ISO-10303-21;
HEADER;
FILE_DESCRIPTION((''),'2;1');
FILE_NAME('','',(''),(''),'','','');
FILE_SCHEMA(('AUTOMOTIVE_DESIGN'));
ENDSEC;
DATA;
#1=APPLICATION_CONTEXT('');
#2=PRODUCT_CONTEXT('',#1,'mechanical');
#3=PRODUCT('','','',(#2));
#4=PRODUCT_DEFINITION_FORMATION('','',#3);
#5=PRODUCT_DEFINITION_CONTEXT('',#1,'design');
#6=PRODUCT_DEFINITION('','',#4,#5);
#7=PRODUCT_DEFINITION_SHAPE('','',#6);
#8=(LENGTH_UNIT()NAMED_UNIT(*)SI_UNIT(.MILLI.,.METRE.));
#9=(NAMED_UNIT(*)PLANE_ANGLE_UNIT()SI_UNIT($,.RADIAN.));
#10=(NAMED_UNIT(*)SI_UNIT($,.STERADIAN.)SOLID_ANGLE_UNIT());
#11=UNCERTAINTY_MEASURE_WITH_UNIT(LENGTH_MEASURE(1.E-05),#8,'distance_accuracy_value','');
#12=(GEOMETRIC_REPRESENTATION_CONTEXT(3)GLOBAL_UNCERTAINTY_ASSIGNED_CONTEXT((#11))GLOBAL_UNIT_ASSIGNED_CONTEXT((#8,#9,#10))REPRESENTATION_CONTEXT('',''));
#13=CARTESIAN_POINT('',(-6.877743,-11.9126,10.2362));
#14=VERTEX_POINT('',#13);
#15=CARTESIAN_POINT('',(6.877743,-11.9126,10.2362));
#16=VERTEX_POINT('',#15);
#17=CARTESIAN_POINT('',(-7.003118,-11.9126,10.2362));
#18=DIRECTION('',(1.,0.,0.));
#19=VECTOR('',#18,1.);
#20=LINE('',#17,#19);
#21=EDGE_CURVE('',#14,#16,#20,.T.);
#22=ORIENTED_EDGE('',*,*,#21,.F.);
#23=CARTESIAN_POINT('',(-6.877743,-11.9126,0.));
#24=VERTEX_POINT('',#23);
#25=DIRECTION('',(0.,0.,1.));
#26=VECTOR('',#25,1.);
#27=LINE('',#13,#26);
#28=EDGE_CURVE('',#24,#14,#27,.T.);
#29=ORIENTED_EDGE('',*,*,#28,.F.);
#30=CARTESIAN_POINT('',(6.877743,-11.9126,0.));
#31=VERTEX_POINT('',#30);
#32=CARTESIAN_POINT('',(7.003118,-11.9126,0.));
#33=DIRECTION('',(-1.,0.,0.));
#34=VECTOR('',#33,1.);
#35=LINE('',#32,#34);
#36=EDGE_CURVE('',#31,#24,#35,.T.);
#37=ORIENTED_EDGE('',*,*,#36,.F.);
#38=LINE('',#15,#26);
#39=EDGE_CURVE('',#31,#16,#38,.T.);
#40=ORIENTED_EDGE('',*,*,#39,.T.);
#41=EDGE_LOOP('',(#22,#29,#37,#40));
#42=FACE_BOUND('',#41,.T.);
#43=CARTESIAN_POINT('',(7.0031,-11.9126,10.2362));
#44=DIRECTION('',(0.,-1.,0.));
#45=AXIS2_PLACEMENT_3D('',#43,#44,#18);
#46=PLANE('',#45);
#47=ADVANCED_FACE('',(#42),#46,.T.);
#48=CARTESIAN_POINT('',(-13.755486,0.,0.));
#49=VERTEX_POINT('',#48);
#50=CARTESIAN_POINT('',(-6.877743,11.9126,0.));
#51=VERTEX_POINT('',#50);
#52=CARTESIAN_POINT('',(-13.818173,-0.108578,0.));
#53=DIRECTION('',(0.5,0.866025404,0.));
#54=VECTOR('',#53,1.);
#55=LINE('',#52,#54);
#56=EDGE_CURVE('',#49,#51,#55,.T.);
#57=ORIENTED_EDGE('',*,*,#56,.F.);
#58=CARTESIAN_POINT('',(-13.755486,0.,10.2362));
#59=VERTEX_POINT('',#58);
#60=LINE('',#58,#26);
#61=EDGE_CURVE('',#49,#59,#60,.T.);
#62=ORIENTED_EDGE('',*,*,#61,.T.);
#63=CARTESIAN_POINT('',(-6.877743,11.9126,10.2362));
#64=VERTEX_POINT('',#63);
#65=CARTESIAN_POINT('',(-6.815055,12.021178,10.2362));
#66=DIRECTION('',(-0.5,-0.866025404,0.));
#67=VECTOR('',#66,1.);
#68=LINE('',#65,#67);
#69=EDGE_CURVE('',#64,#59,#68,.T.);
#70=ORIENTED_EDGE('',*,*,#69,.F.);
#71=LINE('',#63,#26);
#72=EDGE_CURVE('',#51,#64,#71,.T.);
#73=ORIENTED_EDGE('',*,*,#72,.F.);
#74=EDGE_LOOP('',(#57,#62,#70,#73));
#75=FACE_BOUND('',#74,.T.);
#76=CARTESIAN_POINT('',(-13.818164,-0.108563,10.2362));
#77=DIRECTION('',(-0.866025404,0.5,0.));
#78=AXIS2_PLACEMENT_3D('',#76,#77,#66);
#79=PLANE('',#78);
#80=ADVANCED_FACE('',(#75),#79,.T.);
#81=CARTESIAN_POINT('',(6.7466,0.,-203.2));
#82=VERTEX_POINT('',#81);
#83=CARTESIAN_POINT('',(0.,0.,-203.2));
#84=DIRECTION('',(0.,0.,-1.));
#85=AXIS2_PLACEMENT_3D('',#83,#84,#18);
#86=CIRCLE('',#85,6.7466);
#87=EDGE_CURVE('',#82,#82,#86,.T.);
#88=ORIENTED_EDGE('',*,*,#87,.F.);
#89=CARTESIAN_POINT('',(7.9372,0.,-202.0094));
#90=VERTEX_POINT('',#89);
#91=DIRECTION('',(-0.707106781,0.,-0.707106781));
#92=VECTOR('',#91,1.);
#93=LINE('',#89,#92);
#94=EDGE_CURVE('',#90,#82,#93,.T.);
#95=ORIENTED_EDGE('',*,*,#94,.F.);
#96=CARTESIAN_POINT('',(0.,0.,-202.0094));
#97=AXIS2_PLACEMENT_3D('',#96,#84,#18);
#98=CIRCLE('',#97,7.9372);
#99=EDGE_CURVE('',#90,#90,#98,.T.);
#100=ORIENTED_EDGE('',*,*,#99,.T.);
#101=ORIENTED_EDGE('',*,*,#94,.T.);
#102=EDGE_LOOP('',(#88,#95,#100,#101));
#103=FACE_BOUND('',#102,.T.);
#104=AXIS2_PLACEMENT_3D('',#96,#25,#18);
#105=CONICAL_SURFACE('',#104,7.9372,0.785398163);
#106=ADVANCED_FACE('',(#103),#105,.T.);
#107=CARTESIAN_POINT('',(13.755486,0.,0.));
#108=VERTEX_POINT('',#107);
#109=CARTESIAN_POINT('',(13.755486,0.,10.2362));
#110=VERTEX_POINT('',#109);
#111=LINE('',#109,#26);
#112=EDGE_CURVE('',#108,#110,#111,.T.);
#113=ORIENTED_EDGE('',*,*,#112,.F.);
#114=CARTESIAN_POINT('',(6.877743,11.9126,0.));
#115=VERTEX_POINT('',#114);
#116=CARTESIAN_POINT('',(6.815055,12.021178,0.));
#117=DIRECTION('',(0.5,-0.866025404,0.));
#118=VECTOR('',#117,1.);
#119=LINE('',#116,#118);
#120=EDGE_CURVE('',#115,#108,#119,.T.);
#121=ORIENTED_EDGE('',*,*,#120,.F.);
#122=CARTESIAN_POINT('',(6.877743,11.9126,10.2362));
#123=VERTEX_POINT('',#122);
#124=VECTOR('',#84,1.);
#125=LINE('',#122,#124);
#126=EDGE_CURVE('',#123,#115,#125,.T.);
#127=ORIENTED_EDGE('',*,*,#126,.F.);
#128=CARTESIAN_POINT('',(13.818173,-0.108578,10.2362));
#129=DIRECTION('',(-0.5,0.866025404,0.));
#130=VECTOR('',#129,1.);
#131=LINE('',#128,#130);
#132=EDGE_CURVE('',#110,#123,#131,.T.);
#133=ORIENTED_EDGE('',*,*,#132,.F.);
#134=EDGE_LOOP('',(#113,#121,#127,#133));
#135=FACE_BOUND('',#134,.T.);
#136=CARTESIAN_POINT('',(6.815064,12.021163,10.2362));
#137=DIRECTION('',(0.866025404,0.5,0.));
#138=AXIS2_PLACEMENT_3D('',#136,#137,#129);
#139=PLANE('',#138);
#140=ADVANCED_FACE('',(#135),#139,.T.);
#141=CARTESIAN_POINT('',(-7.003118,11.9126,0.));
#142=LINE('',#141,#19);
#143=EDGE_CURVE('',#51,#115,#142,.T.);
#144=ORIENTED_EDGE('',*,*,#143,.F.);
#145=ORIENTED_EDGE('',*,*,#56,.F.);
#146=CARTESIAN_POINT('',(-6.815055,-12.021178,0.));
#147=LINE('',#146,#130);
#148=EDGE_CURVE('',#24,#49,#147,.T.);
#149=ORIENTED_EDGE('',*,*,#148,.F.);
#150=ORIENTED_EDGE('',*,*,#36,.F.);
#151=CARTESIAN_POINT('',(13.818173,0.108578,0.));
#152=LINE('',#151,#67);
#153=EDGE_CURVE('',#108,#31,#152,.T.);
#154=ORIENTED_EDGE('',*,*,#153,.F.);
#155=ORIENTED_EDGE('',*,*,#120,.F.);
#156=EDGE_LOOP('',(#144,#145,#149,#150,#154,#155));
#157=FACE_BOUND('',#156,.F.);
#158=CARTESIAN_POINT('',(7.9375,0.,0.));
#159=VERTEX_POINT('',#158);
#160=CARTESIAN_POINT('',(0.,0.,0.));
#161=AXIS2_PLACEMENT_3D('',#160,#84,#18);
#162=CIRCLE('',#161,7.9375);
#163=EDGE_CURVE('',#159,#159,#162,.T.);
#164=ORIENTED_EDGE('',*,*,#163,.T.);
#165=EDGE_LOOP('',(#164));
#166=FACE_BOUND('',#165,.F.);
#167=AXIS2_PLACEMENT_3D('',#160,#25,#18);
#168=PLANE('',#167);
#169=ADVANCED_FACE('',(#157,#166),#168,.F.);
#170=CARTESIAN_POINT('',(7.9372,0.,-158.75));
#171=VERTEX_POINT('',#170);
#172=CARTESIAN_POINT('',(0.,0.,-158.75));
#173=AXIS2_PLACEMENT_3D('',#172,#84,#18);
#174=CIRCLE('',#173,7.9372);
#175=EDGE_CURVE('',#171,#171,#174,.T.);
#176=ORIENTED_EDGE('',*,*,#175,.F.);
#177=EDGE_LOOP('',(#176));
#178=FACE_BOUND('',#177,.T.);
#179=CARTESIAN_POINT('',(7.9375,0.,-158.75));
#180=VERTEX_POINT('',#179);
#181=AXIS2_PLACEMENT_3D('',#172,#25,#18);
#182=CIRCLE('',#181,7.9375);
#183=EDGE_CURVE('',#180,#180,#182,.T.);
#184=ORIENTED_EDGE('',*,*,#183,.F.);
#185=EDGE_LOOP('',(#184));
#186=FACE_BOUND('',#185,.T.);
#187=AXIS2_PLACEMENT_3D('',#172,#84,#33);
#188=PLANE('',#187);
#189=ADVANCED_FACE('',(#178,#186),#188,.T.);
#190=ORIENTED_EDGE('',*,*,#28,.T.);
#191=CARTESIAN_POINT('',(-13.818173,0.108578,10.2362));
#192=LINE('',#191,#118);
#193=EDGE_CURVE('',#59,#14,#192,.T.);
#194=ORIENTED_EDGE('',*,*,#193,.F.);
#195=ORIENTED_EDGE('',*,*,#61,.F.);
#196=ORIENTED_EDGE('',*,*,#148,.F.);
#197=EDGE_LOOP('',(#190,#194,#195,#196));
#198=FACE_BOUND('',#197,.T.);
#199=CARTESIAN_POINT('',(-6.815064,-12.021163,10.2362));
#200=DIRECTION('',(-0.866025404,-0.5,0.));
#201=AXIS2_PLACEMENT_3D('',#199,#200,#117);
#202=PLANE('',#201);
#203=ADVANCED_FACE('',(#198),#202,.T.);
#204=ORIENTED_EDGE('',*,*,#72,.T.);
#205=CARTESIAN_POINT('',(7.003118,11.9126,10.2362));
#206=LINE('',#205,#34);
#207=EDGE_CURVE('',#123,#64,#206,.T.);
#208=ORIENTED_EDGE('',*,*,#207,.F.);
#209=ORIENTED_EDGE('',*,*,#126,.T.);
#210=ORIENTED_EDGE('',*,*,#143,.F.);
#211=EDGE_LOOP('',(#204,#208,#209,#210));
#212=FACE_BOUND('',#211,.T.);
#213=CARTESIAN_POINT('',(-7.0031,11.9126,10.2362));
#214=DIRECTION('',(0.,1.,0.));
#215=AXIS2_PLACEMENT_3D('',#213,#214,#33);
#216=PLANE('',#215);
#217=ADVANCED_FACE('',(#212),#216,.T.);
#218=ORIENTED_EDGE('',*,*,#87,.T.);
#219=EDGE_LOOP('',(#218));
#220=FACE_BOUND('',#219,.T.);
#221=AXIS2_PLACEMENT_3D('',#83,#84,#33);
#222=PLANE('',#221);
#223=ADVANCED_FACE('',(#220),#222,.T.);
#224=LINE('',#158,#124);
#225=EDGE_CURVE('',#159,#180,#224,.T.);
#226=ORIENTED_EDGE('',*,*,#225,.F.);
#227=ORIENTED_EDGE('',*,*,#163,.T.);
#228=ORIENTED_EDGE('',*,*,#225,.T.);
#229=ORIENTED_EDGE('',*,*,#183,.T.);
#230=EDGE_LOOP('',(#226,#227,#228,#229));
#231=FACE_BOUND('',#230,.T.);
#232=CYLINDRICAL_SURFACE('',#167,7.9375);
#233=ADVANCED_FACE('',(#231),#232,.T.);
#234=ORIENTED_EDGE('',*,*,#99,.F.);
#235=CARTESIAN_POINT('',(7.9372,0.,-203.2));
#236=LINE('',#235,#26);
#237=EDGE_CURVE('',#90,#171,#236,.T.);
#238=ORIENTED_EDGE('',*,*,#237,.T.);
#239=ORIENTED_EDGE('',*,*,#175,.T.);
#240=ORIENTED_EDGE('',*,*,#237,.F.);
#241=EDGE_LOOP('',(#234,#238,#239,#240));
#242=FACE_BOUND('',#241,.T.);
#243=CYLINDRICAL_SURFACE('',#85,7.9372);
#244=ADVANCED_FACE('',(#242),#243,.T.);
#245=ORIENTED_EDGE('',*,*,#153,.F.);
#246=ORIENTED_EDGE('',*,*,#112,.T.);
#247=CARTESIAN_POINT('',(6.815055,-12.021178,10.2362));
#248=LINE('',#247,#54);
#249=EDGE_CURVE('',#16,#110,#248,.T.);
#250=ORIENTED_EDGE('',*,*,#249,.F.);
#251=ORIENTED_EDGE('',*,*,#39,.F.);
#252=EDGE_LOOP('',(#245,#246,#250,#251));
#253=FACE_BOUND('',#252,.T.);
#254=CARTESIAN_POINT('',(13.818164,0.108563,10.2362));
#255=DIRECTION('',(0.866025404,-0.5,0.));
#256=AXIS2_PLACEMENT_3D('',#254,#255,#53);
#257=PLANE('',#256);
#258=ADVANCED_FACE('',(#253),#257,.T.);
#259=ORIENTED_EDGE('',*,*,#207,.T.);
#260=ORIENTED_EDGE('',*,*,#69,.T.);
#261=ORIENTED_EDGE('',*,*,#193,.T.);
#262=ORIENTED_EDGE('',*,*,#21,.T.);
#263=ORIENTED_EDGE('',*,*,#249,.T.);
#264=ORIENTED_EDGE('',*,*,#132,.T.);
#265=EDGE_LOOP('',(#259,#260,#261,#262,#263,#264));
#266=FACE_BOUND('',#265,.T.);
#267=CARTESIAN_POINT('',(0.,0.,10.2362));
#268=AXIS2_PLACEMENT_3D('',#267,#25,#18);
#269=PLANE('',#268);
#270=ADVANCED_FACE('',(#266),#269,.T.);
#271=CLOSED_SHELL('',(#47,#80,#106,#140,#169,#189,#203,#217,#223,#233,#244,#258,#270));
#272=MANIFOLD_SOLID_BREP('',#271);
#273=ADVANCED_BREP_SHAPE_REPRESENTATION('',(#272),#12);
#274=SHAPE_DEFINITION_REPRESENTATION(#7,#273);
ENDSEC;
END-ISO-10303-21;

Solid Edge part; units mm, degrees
sketch "Sketch1" plane through (0, 0, 0) normal (0, 0, 1) x (1, 0, 0)
  circle A0 centre (0, 0) radius 13.8186
  dimension "D1" = 27.6372
extrude "Protrusion1" add sketch "Sketch1" along normal blind 10.2362
sketch "Sketch2" plane through (0, 0, 0) normal (0, 0, -1) x (1, 0, 0)
  circle A0 centre (0, 0) radius 7.9375
extrude "Protrusion2" add sketch "Sketch2" along normal blind 203.2
sketch "Sketch3" plane through (0, 0, -203.2) normal (0, 0, -1) x (1, 0, 0)
  circle A0 centre (0, 0) radius 7.9372
extrude "Cutout1" cut sketch "Sketch3" against normal blind 44.45 flip side to cut
chamfer "Chamfer_1" distance 1.1906 angle 45 1 edges at (-7.9372, 0, -203.2)
sketch "Sketch4" plane through (0, 0, 10.2362) normal (0, 0, 1) x (1, 0, 0)
  line L0 (-7.0031, 11.9126) -> (7.0031, 11.9126)
  dimension "D1" = 23.8252
extrude "Cutout2" cut sketch "Sketch4" against normal up to next material side at (0, 11.9626, 10.2362)
pattern_circular "Pattern1" count 6 over 360 about axis through (0, 0, 10.2362) along (0, 0, 1) of "Cutout2"
properties part number "24107373"
